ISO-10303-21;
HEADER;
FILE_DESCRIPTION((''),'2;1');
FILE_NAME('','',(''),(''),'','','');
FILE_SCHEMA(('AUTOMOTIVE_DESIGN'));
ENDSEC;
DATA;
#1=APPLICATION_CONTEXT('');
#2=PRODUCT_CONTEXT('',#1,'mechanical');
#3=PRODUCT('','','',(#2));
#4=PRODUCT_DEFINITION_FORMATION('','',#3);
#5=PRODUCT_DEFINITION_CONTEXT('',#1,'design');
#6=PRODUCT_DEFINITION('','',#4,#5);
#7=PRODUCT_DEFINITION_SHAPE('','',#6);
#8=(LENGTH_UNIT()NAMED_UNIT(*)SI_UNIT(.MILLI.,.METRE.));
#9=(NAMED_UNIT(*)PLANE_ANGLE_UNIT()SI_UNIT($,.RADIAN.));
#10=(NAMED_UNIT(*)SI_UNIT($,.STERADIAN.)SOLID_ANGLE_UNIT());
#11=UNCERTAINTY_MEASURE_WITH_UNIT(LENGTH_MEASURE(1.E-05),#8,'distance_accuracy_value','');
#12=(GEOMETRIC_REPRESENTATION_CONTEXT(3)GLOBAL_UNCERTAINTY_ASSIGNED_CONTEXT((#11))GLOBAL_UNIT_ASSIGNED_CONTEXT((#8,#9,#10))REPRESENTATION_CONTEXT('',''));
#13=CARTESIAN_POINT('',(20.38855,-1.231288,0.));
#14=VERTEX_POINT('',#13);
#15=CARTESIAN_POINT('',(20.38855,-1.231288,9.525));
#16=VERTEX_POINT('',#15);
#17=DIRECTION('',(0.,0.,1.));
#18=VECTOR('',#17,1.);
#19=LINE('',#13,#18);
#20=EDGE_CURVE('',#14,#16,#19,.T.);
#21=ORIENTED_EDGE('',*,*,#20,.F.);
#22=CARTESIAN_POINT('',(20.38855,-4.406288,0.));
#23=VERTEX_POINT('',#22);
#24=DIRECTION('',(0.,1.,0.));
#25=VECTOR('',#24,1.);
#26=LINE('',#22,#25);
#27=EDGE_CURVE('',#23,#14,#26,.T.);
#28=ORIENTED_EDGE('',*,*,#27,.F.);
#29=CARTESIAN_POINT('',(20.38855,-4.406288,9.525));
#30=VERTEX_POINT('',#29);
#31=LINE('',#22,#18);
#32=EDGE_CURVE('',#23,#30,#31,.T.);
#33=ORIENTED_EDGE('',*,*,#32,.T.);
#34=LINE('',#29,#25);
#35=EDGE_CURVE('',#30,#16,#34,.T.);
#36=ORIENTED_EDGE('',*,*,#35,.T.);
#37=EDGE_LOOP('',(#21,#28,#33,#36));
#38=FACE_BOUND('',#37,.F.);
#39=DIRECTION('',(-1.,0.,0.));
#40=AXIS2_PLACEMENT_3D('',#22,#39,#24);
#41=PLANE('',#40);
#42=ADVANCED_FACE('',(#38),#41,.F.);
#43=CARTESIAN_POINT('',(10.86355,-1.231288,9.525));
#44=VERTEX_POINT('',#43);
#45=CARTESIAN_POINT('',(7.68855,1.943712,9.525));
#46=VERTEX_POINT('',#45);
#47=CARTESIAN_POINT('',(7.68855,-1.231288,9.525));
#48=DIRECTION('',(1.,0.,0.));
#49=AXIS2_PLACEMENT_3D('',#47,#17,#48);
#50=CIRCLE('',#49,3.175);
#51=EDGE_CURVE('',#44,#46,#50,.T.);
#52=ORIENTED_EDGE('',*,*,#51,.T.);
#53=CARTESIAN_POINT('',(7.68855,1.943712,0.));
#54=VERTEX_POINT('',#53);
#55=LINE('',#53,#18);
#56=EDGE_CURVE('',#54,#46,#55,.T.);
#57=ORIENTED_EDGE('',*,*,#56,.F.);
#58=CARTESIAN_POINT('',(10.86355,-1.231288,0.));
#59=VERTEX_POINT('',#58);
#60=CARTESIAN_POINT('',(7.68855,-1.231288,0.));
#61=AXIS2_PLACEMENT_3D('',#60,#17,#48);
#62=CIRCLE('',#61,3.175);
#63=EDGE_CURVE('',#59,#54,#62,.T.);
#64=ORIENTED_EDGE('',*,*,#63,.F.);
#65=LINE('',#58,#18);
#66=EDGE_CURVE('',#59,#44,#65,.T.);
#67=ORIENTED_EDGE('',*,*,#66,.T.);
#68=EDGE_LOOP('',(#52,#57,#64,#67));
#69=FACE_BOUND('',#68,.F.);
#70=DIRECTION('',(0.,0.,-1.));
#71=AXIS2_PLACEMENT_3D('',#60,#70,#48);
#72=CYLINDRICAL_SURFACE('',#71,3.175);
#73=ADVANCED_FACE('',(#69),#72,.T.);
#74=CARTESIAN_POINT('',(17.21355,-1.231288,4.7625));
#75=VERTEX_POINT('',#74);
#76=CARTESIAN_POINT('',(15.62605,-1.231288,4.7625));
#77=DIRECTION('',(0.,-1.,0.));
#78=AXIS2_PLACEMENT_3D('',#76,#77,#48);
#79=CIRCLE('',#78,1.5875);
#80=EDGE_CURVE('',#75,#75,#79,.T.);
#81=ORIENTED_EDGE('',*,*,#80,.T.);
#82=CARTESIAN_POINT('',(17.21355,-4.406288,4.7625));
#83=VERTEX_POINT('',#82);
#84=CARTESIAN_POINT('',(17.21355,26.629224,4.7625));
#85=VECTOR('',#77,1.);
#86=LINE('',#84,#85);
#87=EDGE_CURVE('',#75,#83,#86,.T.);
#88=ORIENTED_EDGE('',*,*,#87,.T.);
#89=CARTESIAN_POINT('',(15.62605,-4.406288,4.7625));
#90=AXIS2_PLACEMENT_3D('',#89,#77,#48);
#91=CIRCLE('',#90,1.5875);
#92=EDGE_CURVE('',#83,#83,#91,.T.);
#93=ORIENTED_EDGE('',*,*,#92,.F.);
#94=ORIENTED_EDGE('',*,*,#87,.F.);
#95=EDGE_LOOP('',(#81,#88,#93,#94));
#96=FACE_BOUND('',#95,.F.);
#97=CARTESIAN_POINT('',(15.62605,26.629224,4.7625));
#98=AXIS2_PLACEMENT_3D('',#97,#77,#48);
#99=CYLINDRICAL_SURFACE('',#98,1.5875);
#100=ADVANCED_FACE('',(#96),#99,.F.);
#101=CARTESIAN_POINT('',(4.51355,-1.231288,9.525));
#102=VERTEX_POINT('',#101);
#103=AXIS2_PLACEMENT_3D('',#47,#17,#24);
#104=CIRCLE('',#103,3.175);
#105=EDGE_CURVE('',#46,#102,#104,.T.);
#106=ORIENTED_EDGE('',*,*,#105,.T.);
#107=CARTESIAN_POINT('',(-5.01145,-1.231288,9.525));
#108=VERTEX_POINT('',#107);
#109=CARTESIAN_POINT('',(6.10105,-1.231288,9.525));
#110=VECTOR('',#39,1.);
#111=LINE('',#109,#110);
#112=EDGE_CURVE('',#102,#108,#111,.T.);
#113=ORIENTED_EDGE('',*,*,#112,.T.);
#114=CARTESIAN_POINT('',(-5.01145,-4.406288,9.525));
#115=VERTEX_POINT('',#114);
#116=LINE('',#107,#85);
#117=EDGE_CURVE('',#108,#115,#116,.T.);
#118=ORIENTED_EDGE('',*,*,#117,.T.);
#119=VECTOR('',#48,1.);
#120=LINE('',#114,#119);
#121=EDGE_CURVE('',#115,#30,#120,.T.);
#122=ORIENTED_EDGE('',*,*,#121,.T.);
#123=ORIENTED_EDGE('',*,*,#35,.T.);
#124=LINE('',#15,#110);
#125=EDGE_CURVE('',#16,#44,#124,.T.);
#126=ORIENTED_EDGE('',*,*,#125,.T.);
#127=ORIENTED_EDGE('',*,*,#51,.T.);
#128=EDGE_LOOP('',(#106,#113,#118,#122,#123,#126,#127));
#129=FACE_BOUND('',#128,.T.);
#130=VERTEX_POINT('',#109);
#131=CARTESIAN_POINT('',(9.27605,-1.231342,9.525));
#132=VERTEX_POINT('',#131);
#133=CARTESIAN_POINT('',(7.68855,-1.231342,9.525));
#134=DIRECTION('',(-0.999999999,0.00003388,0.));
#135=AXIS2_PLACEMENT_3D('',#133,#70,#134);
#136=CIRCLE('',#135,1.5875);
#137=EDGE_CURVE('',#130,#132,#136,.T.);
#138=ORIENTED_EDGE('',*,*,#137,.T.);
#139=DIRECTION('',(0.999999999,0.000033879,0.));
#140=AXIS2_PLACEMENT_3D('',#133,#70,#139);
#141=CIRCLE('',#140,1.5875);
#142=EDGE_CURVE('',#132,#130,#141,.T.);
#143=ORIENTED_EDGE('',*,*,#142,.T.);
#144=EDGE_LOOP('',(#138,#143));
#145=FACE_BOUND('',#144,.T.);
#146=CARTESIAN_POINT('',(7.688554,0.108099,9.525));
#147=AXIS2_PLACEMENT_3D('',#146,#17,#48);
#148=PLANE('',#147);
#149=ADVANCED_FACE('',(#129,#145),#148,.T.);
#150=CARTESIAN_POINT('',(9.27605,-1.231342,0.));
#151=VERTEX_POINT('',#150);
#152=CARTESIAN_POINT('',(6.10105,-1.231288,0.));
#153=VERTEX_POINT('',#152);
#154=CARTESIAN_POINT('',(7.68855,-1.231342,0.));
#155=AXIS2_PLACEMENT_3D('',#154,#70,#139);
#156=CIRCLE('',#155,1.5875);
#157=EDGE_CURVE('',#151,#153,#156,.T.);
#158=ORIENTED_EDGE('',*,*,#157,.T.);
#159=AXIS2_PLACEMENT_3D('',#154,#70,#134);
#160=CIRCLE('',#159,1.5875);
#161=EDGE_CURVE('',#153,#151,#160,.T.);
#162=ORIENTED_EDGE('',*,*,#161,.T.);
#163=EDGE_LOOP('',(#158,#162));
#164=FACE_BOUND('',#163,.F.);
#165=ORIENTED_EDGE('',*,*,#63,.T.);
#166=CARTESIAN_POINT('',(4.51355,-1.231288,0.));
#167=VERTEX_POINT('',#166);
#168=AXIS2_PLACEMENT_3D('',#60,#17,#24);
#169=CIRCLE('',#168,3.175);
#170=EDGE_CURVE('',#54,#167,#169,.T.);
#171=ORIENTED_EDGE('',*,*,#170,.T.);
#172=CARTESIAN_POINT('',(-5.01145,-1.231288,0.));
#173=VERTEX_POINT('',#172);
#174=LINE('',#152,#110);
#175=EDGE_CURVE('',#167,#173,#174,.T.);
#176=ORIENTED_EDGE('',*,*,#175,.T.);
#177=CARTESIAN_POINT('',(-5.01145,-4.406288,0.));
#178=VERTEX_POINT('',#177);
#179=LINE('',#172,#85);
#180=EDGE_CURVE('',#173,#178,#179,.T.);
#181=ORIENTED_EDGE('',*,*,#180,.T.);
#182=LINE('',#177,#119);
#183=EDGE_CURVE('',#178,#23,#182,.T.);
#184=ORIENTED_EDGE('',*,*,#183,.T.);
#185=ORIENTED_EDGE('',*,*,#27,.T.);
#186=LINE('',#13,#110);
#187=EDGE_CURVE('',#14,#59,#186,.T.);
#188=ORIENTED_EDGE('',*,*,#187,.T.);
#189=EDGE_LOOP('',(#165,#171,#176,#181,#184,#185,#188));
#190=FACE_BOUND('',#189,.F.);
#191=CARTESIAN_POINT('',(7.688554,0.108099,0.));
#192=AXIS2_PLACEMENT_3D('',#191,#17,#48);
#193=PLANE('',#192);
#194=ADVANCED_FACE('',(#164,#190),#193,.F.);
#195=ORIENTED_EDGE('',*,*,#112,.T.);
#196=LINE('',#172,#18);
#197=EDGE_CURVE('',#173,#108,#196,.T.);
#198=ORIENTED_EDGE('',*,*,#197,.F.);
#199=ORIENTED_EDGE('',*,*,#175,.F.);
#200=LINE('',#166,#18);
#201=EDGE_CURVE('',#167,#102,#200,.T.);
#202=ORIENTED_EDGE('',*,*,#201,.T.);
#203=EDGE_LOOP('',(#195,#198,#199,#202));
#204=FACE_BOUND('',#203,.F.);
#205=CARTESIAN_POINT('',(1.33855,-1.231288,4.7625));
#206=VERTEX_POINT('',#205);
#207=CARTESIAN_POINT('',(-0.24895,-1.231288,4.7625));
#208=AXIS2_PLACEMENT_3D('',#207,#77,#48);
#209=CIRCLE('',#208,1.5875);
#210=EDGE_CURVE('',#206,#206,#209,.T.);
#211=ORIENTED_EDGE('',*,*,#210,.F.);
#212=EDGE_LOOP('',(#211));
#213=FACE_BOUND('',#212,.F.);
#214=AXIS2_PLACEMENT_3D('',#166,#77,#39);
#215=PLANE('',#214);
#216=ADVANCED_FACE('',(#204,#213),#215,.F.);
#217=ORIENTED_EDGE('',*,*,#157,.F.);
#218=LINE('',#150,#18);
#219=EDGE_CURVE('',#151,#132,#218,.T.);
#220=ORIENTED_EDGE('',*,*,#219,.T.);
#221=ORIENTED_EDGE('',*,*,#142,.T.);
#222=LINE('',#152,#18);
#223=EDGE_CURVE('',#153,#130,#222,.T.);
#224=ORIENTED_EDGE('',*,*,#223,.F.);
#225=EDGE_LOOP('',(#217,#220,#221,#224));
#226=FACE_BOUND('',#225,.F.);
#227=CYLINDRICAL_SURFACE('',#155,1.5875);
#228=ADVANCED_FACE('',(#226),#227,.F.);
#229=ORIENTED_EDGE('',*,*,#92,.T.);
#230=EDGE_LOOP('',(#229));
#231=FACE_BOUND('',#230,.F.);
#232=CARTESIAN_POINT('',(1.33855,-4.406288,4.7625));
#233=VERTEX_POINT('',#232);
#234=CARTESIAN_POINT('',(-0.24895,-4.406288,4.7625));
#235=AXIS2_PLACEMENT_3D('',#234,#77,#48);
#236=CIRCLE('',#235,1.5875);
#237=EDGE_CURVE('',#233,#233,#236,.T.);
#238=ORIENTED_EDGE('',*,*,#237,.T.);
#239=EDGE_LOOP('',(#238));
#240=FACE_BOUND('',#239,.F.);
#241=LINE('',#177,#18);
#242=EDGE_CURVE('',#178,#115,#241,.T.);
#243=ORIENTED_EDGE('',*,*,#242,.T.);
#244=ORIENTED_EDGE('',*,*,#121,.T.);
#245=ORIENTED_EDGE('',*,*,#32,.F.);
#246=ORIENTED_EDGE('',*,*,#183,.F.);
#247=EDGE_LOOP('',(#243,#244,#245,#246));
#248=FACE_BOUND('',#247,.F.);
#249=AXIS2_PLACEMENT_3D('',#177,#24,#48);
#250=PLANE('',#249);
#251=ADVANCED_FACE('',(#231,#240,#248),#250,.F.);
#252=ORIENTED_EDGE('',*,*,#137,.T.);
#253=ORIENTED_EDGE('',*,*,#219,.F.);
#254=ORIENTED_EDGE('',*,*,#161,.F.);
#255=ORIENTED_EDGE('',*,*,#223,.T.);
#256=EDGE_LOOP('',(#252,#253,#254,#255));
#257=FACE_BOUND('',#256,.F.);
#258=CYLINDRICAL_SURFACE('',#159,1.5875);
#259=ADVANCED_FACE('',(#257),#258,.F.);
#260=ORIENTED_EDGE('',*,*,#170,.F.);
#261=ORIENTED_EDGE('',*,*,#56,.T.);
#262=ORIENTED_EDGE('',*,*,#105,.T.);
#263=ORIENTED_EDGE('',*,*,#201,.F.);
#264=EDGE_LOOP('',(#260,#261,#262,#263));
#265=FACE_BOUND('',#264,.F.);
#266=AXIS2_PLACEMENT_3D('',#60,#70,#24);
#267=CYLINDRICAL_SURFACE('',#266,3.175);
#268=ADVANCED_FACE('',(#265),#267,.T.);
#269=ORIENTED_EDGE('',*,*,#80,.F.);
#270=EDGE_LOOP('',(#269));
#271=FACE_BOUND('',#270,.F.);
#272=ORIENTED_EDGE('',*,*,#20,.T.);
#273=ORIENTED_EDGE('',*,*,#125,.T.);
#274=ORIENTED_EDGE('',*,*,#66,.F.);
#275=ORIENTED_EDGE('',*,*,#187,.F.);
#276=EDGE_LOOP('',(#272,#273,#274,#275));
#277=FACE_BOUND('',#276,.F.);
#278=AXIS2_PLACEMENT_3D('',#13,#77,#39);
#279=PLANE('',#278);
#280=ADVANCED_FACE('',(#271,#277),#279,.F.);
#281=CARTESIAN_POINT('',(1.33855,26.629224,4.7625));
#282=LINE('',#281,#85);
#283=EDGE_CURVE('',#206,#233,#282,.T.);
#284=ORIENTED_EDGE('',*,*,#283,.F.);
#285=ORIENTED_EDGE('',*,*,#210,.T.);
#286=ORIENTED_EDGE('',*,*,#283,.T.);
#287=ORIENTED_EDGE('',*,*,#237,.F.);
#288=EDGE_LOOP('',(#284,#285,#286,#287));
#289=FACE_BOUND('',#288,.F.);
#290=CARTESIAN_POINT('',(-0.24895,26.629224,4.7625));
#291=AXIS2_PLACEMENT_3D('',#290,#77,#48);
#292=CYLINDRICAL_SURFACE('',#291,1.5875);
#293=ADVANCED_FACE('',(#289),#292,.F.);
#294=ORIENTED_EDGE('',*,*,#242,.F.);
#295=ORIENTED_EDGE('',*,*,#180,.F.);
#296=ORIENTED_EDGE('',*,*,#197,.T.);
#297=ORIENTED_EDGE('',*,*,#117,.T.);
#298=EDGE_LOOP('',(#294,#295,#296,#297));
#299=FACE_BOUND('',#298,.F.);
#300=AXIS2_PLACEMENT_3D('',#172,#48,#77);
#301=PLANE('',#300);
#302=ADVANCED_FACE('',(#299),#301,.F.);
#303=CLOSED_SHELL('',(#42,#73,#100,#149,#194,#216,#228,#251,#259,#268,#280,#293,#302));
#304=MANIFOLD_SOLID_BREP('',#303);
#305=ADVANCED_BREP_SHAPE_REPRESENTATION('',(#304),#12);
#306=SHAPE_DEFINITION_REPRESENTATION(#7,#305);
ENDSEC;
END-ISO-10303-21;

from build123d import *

# Parameters (mm, degrees)
F1_DEPTH = 9.525
F3_D     = 3.175
F5_D     = 3.175


# Not quite as in the source:
# - ends of sketch curves that miss each other by under 0.0002 mm in the source are joined
# - a length typed as a fraction of an inch, garbled in the dataset ("3 / 203.2 mm" for 3/8 in), is restored


with BuildPart() as f1:
    # F0 (on Top) → F1 (new body)
    with BuildSketch(Plane.XY):
        with BuildLine():
            ThreePointArc((7.6885502785, 1.9437116954), (5.4434862483, 1.0137757257), (4.5135502785, -1.2312883046))
            Line((4.5135502785, -1.2312883046), (6.1010502795, -1.2312883046))
            ThreePointArc((6.1010502795, -1.2312883046), (7.6885771705, 0.3561579113), (9.2760502785, -1.2313420884))
            Line((9.2760502785, -1.2313420884), (10.8635502785, -1.2312883046))
            ThreePointArc((10.8635502785, -1.2312883046), (9.9336143088, 1.0137757257), (7.6885502785, 1.9437116954))
        make_face()
        with BuildLine():
            Line((-5.0114497215, -1.2312883046), (-5.0114497215, -4.4062883046))
            Line((-5.0114497215, -4.4062883046), (20.3885502785, -4.4062883046))
            Line((20.3885502785, -4.4062883046), (20.3885502785, -1.2312883046))
            Line((20.3885502785, -1.2312883046), (10.8635502785, -1.2312883046))
            Line((10.8635502785, -1.2312883046), (9.2760502785, -1.2312883046))
            ThreePointArc((9.2760502785, -1.2312883046), (7.6885233866, -2.8188420882), (6.1010502795, -1.2312883046))
            Line((6.1010502795, -1.2312883046), (4.5135502785, -1.2312883046))
            Line((4.5135502785, -1.2312883046), (-5.0114497215, -1.2312883046))
        make_face()
    extrude(amount=F1_DEPTH)

    # F3 (through all)
    with Locations(Plane(origin=(0, -1.2312883046, 0), x_dir=(-1, 0, 0), z_dir=(0, 1, 0))):
        with Locations((-15.6260502785, 4.7625)):
            Hole(F3_D / 2)

    # F5 (through all)
    with Locations(Plane(origin=(0, -1.2312883046, 0), x_dir=(-1, 0, 0), z_dir=(0, 1, 0))):
        with Locations((0.2489497215, 4.7625)):
            Hole(F5_D / 2)


solid = f1.part
